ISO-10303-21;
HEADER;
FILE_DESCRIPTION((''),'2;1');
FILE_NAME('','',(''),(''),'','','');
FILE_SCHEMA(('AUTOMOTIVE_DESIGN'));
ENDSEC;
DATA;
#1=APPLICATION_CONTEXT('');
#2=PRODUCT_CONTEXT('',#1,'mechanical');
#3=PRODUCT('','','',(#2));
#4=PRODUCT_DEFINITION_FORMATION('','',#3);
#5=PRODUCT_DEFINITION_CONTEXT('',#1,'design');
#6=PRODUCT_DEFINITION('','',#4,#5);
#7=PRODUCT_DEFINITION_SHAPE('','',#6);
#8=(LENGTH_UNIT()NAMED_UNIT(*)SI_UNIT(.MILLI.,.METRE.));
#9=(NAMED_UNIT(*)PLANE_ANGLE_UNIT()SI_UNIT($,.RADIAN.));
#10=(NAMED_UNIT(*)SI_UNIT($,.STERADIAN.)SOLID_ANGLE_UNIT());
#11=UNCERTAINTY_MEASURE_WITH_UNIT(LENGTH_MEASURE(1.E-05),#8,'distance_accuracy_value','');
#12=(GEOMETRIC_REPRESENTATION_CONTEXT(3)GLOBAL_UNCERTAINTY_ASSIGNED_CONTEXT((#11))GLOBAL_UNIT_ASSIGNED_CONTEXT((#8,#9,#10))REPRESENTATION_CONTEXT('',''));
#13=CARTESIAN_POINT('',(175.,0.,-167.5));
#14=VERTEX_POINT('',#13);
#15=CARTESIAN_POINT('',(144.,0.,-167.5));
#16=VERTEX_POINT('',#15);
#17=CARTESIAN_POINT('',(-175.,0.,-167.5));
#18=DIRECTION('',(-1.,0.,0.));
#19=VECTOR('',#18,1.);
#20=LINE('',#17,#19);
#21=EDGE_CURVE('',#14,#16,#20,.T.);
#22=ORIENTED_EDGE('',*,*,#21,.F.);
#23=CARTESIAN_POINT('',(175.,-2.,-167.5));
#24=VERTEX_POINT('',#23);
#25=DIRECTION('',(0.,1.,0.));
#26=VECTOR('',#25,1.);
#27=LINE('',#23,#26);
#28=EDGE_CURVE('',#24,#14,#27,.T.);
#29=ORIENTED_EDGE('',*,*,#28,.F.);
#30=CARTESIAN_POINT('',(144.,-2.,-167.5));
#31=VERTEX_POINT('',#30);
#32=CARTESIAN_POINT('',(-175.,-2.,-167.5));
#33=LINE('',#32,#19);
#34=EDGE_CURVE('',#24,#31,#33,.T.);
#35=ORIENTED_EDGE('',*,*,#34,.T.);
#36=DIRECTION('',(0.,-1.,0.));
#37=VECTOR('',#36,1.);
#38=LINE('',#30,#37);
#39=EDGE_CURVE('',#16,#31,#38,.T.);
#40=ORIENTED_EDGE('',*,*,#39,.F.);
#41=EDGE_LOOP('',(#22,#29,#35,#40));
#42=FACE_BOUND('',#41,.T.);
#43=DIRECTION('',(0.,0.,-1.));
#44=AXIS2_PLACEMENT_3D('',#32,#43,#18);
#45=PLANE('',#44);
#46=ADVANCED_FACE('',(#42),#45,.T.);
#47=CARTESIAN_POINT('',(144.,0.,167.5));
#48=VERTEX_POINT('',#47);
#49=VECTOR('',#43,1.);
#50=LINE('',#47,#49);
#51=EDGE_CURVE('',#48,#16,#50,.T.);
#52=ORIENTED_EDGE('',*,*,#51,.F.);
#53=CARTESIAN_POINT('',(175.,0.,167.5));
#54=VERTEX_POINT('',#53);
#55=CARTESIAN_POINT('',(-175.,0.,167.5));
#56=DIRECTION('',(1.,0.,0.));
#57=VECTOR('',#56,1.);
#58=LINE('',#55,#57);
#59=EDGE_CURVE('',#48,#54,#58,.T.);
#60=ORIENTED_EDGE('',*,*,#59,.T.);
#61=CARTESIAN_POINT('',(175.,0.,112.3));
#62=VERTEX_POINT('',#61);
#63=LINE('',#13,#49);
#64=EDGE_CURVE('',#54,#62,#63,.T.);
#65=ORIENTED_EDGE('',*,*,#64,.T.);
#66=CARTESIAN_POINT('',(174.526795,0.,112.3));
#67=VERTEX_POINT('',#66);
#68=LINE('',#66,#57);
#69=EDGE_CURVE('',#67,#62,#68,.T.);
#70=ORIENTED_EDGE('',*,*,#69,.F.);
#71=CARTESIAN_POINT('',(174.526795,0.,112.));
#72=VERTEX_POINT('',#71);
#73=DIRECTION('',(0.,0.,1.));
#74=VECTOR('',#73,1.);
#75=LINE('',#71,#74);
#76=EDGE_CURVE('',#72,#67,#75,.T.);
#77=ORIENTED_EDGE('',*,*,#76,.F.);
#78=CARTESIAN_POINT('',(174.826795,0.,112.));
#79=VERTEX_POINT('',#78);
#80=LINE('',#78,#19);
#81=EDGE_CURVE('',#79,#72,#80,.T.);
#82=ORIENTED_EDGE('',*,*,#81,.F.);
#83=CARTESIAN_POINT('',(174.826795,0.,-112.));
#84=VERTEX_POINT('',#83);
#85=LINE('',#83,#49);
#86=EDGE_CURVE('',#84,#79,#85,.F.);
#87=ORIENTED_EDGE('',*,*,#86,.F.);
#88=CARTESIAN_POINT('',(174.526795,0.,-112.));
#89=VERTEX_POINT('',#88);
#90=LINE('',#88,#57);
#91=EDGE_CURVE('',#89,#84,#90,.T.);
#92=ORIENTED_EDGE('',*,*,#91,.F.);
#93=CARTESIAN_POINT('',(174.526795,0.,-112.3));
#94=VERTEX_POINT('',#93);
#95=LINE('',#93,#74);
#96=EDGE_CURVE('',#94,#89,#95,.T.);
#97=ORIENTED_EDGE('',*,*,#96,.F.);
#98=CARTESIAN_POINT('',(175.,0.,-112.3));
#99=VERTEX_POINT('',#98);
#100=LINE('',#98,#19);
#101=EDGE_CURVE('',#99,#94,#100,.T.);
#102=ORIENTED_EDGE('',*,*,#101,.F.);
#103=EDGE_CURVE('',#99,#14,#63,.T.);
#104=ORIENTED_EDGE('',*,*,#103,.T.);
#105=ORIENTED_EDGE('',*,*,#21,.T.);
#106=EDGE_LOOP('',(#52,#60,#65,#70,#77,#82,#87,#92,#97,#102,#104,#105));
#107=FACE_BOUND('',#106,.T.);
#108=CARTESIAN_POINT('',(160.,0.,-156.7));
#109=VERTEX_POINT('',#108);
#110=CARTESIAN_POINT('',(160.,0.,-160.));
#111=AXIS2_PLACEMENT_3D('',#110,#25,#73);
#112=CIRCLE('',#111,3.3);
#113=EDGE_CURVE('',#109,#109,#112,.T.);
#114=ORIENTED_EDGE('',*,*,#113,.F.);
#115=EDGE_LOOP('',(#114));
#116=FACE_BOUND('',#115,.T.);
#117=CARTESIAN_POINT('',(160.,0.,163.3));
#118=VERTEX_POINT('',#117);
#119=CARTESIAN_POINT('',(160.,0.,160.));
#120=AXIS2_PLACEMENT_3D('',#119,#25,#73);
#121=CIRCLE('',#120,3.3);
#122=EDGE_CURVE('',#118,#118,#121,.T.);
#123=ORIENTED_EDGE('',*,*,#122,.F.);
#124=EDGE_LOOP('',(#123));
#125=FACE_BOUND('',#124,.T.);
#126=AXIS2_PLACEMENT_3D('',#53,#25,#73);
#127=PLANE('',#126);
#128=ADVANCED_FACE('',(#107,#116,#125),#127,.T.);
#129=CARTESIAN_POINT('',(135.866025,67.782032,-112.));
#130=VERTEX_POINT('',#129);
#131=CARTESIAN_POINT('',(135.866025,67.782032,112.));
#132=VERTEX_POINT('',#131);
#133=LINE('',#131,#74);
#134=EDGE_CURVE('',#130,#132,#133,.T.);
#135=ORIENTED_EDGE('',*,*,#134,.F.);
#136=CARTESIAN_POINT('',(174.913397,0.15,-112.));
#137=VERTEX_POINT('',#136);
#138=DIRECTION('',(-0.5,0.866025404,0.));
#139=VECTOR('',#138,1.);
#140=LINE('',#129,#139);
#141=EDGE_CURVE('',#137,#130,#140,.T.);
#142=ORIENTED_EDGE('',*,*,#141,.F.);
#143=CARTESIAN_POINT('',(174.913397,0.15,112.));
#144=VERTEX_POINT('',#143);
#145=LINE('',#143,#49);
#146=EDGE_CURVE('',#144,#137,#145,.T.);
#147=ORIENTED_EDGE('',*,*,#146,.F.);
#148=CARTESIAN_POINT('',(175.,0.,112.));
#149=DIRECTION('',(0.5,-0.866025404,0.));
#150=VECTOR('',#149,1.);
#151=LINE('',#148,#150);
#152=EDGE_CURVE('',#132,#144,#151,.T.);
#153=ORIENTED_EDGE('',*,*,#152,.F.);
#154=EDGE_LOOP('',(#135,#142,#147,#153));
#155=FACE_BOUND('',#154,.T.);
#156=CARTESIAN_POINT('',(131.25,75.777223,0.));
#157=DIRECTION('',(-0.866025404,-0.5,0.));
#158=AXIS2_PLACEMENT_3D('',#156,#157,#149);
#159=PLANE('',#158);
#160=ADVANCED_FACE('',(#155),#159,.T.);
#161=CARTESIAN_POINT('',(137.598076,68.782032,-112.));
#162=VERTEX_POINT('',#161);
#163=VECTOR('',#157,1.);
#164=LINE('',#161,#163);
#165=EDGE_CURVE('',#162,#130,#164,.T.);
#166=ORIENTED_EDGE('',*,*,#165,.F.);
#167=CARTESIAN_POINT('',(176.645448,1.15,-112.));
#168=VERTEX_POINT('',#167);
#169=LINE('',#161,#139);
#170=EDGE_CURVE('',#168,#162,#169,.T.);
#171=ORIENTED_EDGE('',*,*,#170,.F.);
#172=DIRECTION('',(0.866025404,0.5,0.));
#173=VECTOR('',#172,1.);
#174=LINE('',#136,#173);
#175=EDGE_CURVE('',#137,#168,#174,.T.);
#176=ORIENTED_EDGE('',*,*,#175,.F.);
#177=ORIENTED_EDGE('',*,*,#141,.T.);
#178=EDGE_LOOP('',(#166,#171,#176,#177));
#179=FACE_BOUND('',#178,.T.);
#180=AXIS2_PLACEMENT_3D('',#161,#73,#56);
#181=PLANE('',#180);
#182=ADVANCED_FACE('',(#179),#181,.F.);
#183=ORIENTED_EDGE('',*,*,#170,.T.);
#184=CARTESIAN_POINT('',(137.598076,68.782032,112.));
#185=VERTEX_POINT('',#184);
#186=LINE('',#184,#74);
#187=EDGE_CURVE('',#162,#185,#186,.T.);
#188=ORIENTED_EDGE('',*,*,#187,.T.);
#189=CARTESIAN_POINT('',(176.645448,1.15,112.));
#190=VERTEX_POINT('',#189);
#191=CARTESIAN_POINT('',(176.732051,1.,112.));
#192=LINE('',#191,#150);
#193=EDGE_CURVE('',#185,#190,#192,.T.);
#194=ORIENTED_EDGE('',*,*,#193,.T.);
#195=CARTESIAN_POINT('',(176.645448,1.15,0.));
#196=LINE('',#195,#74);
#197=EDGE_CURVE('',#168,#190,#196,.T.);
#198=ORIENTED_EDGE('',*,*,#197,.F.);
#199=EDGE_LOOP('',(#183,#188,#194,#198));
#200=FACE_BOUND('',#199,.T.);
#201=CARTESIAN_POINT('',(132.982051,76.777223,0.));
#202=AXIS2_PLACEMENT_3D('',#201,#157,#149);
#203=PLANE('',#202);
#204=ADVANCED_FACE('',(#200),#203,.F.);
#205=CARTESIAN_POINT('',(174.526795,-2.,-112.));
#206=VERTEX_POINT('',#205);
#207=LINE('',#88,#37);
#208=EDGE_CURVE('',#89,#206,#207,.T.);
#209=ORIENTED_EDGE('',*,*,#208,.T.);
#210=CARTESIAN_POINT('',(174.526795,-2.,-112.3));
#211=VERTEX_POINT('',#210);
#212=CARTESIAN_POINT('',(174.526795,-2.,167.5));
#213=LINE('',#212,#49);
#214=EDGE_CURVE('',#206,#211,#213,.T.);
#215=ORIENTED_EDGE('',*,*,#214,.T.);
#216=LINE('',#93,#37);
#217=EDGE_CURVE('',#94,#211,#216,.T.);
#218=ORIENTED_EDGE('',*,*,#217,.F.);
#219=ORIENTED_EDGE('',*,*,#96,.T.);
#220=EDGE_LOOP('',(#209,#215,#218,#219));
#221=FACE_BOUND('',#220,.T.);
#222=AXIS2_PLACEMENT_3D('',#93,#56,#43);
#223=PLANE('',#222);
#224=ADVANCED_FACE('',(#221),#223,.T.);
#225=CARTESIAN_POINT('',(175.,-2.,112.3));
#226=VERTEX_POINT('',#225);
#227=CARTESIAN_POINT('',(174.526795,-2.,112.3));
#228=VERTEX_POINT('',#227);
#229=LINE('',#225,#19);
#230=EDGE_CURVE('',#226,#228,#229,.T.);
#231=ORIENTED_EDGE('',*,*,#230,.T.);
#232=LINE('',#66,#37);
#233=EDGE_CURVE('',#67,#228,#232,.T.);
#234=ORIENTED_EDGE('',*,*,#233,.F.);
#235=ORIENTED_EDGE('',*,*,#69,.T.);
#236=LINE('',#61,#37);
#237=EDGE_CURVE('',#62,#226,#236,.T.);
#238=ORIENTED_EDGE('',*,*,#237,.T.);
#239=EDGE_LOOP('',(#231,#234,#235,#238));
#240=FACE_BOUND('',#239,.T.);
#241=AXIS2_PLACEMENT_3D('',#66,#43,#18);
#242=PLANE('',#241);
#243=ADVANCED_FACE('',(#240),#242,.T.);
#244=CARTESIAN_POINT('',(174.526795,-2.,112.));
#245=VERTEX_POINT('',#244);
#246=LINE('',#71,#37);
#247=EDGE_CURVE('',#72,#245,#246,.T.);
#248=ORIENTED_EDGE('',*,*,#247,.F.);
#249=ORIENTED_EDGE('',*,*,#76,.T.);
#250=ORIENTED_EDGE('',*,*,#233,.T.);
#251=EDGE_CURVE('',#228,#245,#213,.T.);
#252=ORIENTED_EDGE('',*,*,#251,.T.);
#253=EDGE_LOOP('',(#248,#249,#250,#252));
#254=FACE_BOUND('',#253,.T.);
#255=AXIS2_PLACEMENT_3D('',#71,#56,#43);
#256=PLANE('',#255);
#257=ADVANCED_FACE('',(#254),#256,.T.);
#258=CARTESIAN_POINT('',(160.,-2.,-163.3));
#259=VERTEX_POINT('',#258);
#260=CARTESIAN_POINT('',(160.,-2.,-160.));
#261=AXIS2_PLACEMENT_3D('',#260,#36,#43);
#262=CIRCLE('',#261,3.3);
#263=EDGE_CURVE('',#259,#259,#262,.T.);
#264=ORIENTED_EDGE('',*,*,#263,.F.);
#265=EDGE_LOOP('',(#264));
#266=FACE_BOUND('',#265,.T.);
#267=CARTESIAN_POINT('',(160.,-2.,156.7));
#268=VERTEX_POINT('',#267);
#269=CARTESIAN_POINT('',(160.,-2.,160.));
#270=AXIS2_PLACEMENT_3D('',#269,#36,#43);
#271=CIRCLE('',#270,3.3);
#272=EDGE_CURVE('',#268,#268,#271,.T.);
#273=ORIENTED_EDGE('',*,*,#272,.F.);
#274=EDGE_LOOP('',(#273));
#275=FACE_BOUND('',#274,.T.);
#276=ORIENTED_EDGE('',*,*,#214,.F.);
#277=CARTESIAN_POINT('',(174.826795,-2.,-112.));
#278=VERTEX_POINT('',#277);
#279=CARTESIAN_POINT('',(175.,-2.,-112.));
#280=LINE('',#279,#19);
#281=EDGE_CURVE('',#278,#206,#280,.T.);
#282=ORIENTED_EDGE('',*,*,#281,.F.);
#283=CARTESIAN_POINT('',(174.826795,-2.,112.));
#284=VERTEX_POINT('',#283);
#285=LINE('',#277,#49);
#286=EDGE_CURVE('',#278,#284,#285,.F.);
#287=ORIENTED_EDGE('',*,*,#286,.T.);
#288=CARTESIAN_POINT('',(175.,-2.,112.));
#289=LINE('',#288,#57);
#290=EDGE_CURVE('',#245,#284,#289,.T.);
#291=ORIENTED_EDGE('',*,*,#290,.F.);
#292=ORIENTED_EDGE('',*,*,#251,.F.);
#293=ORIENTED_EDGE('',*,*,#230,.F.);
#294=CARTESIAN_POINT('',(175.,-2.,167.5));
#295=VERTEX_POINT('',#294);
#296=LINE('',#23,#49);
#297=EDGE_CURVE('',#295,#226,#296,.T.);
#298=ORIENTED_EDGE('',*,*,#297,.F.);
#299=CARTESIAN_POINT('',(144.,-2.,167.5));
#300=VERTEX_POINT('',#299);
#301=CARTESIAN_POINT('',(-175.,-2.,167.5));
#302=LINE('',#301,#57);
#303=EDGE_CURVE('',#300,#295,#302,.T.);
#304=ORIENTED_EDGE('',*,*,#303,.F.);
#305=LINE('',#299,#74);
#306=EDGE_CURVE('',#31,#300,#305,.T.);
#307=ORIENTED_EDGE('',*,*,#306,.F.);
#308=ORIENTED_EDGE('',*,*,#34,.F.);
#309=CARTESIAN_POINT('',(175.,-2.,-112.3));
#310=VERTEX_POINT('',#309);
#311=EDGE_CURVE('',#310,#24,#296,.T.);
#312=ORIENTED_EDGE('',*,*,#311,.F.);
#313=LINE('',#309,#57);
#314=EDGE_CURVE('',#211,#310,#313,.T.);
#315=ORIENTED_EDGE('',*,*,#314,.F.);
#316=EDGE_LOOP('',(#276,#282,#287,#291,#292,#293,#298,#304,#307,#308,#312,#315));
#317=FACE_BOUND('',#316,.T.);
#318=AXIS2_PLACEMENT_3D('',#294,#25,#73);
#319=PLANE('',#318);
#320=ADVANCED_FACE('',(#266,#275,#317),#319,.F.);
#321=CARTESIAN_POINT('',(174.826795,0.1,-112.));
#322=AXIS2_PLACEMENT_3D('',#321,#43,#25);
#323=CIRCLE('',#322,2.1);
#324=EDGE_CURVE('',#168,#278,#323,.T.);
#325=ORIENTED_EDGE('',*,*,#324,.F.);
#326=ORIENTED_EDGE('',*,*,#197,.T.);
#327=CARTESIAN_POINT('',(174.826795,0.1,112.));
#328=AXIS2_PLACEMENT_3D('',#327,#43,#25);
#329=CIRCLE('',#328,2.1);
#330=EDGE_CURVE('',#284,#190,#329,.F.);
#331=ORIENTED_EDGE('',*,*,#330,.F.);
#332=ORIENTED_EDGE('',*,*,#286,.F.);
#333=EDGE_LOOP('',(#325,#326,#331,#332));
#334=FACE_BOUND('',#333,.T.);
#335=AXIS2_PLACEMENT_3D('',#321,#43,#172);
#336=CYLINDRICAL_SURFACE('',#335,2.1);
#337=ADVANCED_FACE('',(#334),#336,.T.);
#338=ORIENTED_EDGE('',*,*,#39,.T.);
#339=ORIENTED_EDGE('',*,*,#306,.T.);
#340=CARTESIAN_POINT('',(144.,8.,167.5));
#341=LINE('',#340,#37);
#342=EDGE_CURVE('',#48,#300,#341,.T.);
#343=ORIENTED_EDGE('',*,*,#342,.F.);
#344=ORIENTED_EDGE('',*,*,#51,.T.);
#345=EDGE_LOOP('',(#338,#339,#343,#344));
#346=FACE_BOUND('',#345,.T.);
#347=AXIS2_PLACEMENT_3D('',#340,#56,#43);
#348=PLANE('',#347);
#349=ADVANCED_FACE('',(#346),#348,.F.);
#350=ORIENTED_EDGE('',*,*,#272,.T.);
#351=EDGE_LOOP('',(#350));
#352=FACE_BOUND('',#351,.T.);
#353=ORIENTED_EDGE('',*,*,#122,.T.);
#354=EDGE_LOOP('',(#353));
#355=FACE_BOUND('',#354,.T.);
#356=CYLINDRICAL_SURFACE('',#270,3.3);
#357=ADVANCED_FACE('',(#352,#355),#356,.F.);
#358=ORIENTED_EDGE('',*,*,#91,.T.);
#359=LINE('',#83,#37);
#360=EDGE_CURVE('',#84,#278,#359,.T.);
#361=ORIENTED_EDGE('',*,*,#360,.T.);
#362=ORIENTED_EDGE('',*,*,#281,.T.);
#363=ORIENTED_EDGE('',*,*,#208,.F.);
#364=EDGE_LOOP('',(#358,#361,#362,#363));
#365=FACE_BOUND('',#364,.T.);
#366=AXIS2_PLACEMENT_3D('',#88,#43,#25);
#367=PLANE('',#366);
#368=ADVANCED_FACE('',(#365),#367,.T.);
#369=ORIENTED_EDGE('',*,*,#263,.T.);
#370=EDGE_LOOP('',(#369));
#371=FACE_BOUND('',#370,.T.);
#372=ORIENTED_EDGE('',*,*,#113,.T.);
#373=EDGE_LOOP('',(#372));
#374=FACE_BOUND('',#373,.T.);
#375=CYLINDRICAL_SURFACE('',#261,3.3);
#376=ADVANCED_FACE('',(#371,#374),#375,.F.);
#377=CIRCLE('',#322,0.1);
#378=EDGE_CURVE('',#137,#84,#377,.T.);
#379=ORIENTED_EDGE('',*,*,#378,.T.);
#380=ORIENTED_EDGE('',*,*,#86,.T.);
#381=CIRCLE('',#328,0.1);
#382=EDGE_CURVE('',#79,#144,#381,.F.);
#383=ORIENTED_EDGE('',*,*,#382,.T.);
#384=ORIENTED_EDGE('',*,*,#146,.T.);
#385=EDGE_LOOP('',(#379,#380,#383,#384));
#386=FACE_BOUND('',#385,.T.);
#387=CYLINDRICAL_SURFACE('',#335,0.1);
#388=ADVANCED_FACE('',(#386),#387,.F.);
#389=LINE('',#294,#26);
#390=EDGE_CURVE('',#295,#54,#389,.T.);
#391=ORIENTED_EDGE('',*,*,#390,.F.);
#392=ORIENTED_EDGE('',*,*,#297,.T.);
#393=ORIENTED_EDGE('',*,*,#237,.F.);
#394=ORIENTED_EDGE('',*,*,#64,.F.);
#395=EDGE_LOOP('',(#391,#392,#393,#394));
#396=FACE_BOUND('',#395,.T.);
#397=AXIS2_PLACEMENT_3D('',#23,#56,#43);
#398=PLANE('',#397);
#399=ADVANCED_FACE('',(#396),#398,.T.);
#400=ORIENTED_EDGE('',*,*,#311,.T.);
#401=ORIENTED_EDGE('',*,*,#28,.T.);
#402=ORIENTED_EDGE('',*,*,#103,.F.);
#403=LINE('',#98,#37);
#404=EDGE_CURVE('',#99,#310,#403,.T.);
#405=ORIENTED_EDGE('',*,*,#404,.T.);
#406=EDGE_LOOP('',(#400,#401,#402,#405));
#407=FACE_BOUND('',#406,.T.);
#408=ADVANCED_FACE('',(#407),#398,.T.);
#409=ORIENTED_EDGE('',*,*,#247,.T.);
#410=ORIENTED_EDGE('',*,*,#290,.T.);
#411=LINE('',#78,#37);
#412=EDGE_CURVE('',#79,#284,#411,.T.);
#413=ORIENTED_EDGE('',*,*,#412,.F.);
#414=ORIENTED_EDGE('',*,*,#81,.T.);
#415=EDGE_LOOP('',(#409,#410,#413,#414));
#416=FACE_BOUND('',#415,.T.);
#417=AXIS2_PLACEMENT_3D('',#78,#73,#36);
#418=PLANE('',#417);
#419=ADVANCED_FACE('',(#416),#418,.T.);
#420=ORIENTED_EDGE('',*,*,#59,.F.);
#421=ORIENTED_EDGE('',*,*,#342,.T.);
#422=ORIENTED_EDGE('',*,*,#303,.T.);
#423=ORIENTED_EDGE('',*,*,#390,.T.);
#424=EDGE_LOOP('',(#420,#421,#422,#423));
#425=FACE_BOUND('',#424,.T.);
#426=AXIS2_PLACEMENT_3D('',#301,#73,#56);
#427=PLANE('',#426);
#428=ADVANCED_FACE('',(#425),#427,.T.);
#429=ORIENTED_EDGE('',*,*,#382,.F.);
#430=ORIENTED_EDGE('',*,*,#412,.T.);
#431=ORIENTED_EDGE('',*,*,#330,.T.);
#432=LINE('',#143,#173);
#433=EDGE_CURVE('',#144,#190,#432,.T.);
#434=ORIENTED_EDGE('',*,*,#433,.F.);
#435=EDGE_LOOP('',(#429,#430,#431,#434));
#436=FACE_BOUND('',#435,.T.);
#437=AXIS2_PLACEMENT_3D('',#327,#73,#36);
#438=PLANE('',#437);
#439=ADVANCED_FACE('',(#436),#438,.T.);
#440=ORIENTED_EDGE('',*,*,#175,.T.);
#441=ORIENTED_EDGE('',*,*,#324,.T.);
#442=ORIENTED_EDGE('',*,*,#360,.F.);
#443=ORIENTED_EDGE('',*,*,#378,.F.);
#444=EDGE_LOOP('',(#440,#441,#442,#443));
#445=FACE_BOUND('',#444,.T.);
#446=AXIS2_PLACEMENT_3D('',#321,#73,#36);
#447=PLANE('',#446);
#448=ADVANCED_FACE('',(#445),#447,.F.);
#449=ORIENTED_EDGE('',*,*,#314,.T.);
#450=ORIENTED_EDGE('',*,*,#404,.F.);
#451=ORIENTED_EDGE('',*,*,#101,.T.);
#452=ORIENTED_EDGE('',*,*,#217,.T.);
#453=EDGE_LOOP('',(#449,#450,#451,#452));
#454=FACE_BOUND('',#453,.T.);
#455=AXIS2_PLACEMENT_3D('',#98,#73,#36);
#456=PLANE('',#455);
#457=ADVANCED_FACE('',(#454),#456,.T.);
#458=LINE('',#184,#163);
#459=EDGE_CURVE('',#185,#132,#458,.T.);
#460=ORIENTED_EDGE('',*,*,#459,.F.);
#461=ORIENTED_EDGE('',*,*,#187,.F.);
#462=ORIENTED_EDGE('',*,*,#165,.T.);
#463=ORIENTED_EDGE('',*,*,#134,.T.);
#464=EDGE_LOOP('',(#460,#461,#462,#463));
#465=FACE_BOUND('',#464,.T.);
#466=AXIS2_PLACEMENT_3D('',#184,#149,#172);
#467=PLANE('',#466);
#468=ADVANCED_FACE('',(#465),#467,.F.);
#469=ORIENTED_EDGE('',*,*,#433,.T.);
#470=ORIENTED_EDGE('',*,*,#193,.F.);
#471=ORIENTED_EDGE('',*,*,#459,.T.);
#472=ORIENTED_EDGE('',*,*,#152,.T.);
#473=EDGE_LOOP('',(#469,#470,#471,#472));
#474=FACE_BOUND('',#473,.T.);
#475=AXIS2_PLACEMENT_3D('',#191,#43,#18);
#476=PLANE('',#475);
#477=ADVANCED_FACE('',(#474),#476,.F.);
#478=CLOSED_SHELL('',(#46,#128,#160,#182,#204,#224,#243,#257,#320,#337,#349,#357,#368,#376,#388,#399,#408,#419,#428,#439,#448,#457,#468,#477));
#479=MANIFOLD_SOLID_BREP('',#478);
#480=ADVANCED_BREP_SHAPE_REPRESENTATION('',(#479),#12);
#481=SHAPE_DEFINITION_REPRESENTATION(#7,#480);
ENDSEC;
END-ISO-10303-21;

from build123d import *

# Parameters (mm, degrees)
SKIZZE2_W                       = 350
SKIZZE2_H                       = 335
BASIS_BLECH1_DEPTH              = 2
KANTE_LASCHE1_STRIP_CUT_DEPTH   = 224
KANTE_LASCHE1_RELIEF_W          = 14.502816622
KANTE_LASCHE1_RELIEF_H          = 0.3
KANTE_LASCHE1_RELIEF_CUT_DEPTH  = 2
KANTE_LASCHE1_DEPTH             = 224
DURCHGANGSLOCH_F_R_M61_D        = 6.6
DURCHGANGSLOCH_F_R_M61_DEPTH    = 15
DURCHGANGSLOCH_F_R_M61_TIP      = 1.982840043
DURCHGANGSLOCH_F_R_M121_D       = 13.5
SKIZZE30_W                      = 319
SKIZZE30_H                      = 335
SCHNITT_LINEAR_AUSTRAGEN1_DEPTH = 10


# Sheet-metal steps are written as plain solids
with BuildPart() as part:
    # Skizze2 → Basis-Blech1 (new body)
    with BuildSketch(Plane(origin=(0, 0, 0), x_dir=(1, 0, 0), z_dir=(0, 1, 0))):
        Rectangle(SKIZZE2_W, SKIZZE2_H)
    extrude(amount=-BASIS_BLECH1_DEPTH)

    # Kante-Lasche1 strip (across the edge) → Kante-Lasche1 strip cut (cut)
    with BuildSketch(Plane(origin=(175, 0, 112), x_dir=(-0.8660254037844407, -0.49999999999999645, 0), z_dir=(0, 0, -1))):
        Polygon((-11.15, -8.746856578), (1.15, -1.645448267), (0.15, 0.08660254), (-12.15, -7.014805771), align=None)
    extrude(amount=KANTE_LASCHE1_STRIP_CUT_DEPTH, mode=Mode.SUBTRACT)

    # Kante-Lasche1 relief (on the sheet) → Kante-Lasche1 relief cut (cut)
    with BuildSketch(Plane(origin=(174.826794919, 0, 112), x_dir=(-1, 0, 0), z_dir=(0, 1, 0))):
        with Locations((-6.951408311, 0.15)):
            Rectangle(KANTE_LASCHE1_RELIEF_W, KANTE_LASCHE1_RELIEF_H)
        with Locations((-6.951408311, -224.15)):
            Rectangle(KANTE_LASCHE1_RELIEF_W, KANTE_LASCHE1_RELIEF_H)
    extrude(amount=-KANTE_LASCHE1_RELIEF_CUT_DEPTH, mode=Mode.SUBTRACT)

    # Kante-Lasche1 section (across the edge) → Kante-Lasche1 (add)
    with BuildSketch(Plane(origin=(175, 0, 112), x_dir=(-0.8660254037844407, -0.49999999999999645, 0), z_dir=(0, 0, -1))):
        with BuildLine():
            Line((-2, 0.173205081), (-2, 78.267949192))
            Line((-2, 78.267949192), (0, 78.267949192))
            Line((0, 78.267949192), (0, 0.173205081))
            ThreePointArc((0, 0.173205081), (0.05, 0.08660254), (0.15, 0.08660254))
            Line((0.15, 0.08660254), (1.15, -1.645448267))
            ThreePointArc((1.15, -1.645448267), (-0.95, -1.645448267), (-2, 0.173205081))
        make_face()
    extrude(amount=KANTE_LASCHE1_DEPTH)

    # Durchgangsloch für M61
    with Locations(Plane(origin=(0, -2, 0), x_dir=(-1, 0, 0), z_dir=(0, -1, 0))):
        with Locations((-160, -160), (160, -160), (160, 160), (-160, 160)):
            Hole(DURCHGANGSLOCH_F_R_M61_D / 2, depth=DURCHGANGSLOCH_F_R_M61_DEPTH)
            with Locations((0, 0, -(DURCHGANGSLOCH_F_R_M61_DEPTH + DURCHGANGSLOCH_F_R_M61_TIP / 2))):  # 118° drill point
                Cone(0, DURCHGANGSLOCH_F_R_M61_D / 2, DURCHGANGSLOCH_F_R_M61_TIP, mode=Mode.SUBTRACT)

    # Durchgangsloch für M121 (through all)
    with Locations(Plane(origin=(0, 0, 0), x_dir=(1, 0, 0), z_dir=(0, 1, 0))):
        with Locations((-25, 145.5), (-25, -145.5)):
            Hole(DURCHGANGSLOCH_F_R_M121_D / 2)

    # Skizze30 → Schnitt-Linear austragen1 (cut)
    with BuildSketch(Plane.XZ.offset(2)):
        with Locations((-15.5, 0)):
            Rectangle(SKIZZE30_W, SKIZZE30_H)
    extrude(amount=-SCHNITT_LINEAR_AUSTRAGEN1_DEPTH, mode=Mode.SUBTRACT)


solid = part.part
